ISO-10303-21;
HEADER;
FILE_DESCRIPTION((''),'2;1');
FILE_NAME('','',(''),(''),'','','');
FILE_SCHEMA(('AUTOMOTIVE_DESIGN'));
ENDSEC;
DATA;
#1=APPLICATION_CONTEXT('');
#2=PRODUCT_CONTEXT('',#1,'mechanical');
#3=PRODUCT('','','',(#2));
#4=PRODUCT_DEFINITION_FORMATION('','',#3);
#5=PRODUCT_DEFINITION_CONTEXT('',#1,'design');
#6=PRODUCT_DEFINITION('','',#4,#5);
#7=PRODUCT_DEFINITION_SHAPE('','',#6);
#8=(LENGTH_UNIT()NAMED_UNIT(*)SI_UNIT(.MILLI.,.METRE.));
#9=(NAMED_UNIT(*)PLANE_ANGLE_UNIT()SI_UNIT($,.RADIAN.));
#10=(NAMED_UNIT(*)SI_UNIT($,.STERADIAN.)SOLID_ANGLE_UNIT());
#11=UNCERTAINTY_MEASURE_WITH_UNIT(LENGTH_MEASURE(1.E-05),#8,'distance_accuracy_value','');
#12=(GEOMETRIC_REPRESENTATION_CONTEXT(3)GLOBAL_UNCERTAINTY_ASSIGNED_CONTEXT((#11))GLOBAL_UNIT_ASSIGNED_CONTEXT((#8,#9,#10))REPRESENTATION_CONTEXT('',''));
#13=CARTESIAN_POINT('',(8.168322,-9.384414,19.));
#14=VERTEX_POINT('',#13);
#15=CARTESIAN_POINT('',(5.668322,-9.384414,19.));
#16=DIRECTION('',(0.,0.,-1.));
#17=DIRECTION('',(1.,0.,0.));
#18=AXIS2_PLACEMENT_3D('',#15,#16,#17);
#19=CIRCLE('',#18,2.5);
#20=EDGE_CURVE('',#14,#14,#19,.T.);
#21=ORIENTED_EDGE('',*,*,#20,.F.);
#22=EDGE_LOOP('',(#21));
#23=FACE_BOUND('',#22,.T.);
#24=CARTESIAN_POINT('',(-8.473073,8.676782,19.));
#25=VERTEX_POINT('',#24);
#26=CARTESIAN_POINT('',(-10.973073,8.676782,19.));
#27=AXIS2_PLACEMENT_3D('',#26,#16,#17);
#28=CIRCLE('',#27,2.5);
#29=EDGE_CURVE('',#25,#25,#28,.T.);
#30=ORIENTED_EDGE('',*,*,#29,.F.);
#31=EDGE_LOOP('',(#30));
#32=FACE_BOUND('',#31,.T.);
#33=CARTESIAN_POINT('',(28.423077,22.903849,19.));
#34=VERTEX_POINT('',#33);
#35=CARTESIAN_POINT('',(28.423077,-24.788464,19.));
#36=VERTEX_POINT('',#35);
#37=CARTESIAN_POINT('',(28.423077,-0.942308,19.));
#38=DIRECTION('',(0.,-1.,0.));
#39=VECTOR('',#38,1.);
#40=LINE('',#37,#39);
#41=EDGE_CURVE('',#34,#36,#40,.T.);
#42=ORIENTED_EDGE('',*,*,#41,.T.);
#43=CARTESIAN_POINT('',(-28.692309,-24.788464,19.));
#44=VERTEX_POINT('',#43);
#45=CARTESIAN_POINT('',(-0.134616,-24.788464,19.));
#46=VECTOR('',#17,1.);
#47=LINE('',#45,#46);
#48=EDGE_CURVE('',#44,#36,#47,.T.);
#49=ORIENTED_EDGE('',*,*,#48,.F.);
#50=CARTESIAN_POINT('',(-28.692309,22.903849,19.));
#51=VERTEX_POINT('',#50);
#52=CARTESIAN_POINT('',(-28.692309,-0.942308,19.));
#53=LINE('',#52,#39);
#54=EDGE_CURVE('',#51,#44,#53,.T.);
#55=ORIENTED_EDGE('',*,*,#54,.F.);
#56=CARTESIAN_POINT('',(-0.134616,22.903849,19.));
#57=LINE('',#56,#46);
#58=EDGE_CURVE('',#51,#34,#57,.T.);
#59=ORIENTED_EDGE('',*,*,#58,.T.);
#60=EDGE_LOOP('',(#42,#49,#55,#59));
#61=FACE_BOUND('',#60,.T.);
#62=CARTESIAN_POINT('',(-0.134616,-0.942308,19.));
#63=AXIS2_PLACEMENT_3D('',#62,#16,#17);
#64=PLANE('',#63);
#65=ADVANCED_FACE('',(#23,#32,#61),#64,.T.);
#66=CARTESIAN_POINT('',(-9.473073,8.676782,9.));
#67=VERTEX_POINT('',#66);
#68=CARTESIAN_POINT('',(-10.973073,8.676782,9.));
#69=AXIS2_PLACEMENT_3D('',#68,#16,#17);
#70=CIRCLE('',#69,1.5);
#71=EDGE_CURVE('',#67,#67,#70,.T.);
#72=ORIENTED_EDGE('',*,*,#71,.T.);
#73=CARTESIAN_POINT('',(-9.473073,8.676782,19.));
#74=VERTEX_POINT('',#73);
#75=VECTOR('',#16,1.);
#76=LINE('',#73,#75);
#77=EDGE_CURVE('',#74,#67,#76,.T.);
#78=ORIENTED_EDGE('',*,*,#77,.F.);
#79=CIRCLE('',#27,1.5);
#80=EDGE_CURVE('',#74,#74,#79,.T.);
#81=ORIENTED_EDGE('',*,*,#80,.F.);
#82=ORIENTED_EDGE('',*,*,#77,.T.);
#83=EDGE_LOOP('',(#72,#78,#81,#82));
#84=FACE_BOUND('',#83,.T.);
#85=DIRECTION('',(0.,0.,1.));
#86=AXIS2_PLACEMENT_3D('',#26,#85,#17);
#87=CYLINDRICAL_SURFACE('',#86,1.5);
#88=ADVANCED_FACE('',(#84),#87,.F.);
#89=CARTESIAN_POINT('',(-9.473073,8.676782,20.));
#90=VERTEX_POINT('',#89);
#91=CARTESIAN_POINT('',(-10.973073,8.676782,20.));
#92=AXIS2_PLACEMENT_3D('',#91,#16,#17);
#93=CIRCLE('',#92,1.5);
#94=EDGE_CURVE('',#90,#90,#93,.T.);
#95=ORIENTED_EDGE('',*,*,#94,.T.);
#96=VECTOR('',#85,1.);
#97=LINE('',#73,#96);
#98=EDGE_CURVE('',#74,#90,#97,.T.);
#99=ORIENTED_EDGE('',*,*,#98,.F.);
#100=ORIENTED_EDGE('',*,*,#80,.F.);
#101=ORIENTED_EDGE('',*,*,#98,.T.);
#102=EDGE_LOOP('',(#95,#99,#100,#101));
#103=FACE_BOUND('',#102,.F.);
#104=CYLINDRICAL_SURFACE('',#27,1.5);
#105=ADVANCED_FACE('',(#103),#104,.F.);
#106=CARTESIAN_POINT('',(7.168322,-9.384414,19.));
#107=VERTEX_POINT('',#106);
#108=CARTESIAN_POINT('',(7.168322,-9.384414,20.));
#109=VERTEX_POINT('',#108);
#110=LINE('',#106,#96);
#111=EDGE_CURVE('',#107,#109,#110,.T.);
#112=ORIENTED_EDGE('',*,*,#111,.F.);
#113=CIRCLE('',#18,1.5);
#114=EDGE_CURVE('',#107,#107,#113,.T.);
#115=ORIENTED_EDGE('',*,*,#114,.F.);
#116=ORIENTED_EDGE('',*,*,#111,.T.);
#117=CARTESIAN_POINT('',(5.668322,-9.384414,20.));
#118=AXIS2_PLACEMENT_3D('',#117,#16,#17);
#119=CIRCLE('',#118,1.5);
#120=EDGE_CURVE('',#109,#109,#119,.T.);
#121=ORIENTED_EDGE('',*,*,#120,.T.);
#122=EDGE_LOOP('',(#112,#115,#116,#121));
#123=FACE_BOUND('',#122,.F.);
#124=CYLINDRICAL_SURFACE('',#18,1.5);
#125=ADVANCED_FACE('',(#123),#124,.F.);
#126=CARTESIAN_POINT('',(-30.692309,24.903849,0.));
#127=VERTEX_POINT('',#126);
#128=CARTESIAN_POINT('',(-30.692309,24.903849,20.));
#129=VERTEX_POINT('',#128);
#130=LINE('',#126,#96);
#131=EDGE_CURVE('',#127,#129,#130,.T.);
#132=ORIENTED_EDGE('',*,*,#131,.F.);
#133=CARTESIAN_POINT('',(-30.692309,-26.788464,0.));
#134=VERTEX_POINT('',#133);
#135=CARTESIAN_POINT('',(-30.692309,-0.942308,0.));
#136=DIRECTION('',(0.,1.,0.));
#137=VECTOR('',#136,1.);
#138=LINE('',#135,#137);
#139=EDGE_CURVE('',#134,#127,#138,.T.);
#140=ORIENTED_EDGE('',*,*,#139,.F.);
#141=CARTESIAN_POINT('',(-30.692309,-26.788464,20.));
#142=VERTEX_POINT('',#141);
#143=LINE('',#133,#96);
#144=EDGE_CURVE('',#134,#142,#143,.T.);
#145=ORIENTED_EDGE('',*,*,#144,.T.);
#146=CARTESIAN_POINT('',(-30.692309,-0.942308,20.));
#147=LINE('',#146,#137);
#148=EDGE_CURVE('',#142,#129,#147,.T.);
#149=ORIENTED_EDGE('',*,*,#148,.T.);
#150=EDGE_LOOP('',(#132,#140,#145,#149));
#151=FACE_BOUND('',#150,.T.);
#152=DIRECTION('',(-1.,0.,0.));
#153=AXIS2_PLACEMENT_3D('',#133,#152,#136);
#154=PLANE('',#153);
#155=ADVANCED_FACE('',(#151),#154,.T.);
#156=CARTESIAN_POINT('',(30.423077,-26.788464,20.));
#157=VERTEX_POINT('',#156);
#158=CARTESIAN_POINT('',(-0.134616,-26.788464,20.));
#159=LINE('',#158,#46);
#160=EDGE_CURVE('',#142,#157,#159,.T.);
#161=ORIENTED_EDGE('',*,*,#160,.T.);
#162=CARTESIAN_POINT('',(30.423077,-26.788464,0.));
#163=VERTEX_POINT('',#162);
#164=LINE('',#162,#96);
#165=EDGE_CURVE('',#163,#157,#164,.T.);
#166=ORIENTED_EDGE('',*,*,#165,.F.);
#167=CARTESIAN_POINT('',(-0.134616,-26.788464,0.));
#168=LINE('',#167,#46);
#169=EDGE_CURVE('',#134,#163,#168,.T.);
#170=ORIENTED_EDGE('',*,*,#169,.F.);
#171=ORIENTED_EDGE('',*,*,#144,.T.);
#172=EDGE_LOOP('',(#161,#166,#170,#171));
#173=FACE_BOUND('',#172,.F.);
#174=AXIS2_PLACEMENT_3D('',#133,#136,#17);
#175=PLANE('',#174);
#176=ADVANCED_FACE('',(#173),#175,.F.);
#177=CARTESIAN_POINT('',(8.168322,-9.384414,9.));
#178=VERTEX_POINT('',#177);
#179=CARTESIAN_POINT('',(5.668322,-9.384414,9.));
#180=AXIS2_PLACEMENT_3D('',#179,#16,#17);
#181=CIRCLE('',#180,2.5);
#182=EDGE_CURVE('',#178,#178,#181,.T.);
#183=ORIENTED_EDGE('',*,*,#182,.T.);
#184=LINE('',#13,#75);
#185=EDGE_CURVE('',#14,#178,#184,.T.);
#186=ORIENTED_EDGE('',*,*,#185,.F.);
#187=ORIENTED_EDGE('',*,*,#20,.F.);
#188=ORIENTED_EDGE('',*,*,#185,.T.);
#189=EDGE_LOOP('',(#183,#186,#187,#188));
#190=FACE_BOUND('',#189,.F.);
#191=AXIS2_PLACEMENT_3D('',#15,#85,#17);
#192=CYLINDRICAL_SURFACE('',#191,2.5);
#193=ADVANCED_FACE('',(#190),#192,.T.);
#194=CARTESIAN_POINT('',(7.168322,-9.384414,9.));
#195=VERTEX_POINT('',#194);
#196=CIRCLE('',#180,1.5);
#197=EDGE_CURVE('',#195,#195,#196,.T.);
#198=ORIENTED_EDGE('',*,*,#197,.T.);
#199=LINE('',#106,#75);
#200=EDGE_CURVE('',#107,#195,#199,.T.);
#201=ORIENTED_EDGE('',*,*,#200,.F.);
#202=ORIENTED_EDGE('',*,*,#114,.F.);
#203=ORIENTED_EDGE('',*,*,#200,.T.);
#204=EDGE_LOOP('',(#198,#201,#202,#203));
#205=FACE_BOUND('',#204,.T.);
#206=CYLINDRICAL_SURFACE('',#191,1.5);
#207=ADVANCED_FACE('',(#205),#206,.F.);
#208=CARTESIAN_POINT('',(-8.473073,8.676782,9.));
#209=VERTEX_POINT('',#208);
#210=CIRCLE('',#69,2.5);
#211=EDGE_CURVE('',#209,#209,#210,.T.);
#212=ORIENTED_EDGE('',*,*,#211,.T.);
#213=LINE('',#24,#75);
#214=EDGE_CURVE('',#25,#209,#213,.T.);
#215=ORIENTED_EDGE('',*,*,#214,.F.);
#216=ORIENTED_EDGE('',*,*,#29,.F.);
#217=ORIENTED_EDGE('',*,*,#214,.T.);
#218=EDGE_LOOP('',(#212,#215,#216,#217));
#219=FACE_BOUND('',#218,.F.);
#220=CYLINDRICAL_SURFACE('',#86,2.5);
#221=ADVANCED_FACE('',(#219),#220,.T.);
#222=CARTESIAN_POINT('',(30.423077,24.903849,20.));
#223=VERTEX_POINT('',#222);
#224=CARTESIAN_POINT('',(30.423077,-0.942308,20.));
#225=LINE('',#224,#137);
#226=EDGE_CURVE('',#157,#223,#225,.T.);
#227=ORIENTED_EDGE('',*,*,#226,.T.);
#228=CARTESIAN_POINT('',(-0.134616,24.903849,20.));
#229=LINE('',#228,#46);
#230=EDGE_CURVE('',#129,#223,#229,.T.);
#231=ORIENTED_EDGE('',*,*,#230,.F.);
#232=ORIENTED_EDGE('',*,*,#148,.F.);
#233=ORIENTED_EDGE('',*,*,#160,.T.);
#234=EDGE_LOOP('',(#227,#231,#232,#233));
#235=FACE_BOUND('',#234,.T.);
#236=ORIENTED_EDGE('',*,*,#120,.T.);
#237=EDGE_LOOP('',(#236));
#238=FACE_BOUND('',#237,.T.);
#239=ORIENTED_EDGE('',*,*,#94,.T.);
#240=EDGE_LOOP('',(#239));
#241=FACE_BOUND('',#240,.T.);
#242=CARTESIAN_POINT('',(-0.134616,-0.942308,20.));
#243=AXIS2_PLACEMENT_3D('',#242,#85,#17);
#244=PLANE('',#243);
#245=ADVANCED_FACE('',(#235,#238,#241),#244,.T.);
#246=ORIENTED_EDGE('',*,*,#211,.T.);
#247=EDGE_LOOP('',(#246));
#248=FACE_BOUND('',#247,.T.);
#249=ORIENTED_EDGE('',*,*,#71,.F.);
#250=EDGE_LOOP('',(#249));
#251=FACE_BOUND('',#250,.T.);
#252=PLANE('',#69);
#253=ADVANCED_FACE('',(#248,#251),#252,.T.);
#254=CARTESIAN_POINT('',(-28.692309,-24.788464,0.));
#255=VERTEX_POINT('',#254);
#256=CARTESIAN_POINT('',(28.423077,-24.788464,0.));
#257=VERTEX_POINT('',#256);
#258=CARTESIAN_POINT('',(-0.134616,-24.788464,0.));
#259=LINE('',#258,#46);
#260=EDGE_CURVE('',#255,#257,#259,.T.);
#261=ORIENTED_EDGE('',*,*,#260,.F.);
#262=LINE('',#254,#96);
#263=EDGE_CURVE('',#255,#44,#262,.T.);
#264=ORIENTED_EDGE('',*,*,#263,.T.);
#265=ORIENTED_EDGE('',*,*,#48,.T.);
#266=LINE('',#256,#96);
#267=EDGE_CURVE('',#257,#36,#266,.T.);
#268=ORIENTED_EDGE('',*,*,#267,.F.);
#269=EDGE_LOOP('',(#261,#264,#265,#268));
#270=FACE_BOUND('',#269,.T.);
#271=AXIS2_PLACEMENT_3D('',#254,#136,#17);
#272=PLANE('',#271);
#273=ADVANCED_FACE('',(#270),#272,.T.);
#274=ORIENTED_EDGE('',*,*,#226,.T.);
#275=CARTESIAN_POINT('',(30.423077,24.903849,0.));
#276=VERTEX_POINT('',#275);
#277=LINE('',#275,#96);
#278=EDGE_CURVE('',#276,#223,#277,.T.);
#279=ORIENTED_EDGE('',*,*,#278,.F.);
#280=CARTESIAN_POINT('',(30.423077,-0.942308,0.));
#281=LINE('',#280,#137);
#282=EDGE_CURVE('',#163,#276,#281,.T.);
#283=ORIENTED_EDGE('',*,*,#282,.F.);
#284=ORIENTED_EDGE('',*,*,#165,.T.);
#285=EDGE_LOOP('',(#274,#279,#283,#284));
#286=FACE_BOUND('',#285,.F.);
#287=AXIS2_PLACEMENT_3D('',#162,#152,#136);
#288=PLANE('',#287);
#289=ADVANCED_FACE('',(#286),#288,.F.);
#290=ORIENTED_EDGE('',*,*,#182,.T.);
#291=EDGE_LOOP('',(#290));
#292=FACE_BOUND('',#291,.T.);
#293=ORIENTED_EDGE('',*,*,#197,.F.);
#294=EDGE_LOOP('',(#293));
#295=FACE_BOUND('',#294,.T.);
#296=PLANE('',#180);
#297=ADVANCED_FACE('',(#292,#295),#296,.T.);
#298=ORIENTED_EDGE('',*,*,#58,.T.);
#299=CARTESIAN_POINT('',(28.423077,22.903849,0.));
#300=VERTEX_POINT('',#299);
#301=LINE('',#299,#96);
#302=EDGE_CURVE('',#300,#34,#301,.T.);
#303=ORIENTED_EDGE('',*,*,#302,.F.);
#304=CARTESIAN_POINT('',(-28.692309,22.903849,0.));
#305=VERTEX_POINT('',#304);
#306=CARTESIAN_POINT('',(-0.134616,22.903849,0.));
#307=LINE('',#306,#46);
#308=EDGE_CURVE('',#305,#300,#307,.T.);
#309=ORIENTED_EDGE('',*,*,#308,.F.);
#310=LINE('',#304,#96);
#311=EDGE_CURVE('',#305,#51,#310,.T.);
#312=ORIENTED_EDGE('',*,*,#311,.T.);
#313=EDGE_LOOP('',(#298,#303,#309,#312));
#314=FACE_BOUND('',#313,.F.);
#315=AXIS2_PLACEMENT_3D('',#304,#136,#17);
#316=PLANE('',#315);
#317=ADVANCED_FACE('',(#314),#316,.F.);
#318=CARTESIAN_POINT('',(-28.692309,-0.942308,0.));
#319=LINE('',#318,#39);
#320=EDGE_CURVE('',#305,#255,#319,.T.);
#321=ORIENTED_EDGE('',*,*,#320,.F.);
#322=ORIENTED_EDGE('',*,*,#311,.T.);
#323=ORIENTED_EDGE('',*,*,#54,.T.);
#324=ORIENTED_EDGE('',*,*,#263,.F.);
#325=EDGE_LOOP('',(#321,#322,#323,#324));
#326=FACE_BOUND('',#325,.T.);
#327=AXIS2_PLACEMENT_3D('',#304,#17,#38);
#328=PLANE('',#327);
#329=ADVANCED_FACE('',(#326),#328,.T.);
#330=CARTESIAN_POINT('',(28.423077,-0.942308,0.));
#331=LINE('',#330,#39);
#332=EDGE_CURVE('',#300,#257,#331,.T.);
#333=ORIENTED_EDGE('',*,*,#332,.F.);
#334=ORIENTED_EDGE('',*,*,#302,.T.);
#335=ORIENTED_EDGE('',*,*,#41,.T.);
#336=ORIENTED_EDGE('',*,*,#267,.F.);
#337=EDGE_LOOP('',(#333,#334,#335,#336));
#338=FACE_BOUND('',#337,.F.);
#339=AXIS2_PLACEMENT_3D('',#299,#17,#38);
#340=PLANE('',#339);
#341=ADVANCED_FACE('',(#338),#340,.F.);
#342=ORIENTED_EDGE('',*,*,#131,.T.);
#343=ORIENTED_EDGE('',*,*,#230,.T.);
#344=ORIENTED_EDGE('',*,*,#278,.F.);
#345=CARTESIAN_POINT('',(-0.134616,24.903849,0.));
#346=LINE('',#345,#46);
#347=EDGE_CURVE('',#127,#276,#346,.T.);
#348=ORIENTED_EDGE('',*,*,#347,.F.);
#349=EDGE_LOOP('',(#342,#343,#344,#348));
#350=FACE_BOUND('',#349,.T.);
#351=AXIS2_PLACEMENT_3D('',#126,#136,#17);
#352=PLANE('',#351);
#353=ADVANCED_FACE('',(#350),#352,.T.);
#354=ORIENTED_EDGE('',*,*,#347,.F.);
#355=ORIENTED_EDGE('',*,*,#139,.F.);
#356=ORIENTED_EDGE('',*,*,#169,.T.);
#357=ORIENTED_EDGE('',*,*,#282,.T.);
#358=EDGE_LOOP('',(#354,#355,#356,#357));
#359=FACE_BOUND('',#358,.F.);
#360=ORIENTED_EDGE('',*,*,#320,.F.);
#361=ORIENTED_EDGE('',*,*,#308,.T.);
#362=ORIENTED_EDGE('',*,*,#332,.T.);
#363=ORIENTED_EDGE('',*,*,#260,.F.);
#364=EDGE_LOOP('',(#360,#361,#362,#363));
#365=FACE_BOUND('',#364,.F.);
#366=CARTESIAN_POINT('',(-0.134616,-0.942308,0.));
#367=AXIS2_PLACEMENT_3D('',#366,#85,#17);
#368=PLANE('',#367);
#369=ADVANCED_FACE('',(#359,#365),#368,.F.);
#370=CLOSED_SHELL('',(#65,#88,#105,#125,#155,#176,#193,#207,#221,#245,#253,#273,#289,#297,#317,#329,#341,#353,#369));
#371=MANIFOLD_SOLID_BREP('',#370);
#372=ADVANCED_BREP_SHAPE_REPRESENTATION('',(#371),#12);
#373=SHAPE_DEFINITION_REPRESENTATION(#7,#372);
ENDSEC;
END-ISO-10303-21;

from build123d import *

# Parameters (mm, degrees)
F0_W     = 61.1153859645
F0_H     = 51.6923125833
F1_DEPTH = 20
F2_W     = 57.1153859645
F2_H     = 47.6923125833
F3_DEPTH = 19
F4_R     = 2.5
F4_R_2   = 1.5
F5_DEPTH = 10
F6_DEPTH = 1


# Not quite as in the source:
# - a feature of the source that left no trace in its solid (it failed there, or was rolled back) is left out


with BuildPart() as f1:
    # F0 (on Top) → F1 (new body)
    with BuildSketch(Plane.XY):
        with Locations((-0.1346161589, -0.9423075244)):
            Rectangle(F0_W, F0_H)
    extrude(amount=F1_DEPTH)

    # F2 (on face) → F3 (cut)
    with BuildSketch(Plane(origin=(0, 0, 0), x_dir=(1, 0, 0), z_dir=(0, 0, -1))):
        with Locations((-0.1346161589, 0.9423075244)):
            Rectangle(F2_W, F2_H)
    extrude(amount=-F3_DEPTH, mode=Mode.SUBTRACT)

    # F4 (on face) → F5 (join)
    with BuildSketch(Plane(origin=(0, 0, 19), x_dir=(1, 0, 0), z_dir=(0, 0, -1))):
        with Locations((-10.9730726108, -8.6767822504)):
            Circle(F4_R)
        with Locations((-10.9730726108, -8.6767822504)):
            Circle(F4_R_2, mode=Mode.SUBTRACT)
        with Locations((5.6683224998, 9.3844144205)):
            Circle(F4_R)
        with Locations((5.6683224998, 9.3844144205)):
            Circle(F4_R_2, mode=Mode.SUBTRACT)
    extrude(amount=F5_DEPTH)

    # F6 (cut): faces of the model
    f6_faces = [f1.faces().sort_by_distance(p)[0] for p in [
        (-10.9730726108, 8.6767822504, 19),
        (5.6683224998, -9.3844144205, 19),
    ]]
    extrude(f6_faces, amount=-F6_DEPTH, mode=Mode.SUBTRACT)


solid = f1.part
